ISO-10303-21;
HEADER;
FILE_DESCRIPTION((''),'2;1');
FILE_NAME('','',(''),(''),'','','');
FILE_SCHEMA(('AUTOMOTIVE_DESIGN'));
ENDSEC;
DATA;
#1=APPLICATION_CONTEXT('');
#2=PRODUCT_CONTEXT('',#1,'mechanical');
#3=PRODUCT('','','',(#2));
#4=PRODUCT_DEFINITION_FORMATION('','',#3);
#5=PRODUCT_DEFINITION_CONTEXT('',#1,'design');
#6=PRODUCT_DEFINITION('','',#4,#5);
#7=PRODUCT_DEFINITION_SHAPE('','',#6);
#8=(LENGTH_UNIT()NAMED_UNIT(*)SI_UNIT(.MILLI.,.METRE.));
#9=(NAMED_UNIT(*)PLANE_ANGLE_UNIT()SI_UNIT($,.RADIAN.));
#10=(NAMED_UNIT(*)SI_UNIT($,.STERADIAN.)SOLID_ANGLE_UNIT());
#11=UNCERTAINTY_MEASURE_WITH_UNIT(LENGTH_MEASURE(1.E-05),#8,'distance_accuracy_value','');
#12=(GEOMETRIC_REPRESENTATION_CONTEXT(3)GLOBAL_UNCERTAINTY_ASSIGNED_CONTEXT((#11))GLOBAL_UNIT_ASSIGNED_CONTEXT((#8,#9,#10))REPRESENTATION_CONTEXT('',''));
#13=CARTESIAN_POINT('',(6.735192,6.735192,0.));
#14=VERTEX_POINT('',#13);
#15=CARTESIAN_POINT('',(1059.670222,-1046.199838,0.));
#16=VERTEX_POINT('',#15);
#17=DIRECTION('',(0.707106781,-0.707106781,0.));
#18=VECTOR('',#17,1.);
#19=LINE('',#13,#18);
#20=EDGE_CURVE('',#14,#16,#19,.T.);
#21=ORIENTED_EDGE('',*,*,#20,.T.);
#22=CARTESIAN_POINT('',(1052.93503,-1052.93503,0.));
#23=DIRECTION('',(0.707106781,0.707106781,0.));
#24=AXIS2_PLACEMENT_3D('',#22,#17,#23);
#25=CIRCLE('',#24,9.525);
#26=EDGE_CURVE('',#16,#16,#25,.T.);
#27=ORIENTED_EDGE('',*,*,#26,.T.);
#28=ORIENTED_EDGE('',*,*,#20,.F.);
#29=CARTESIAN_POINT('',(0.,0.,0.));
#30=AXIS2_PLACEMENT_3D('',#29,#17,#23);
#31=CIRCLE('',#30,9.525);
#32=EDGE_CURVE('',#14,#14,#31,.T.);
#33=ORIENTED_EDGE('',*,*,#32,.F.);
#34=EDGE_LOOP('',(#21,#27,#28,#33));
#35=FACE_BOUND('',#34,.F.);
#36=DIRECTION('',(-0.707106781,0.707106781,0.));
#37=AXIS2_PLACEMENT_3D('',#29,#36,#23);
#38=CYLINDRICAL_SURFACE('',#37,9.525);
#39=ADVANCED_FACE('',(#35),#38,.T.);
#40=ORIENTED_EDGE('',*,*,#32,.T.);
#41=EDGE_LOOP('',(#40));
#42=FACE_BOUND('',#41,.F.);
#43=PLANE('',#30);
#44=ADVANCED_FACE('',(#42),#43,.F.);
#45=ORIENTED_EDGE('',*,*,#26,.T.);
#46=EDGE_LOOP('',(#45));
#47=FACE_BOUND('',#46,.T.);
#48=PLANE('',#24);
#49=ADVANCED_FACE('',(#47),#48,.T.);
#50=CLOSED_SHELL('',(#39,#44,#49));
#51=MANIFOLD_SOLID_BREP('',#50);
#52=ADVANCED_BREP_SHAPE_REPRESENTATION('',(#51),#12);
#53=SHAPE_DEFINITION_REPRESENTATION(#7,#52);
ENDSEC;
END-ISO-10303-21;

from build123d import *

# Parameters (mm, degrees)
F0_R     = 9.525
F1_DEPTH = 1489.075
F3_ANGLE = 45


# Not quite as in the source:
# - a feature names something its author has since deleted; it is built from what else it names


with BuildPart() as f1:
    # F0 (on Front) → F1 (new body)
    with BuildSketch(Plane.XZ):
        Circle(F0_R)
    extrude(amount=F1_DEPTH)


with BuildPart() as f1_1:
    # F3: moved
    add(f1.part.rotate(Axis((0, 0, 6.35), (0, 0, 1)), F3_ANGLE))


solid = f1_1.part
